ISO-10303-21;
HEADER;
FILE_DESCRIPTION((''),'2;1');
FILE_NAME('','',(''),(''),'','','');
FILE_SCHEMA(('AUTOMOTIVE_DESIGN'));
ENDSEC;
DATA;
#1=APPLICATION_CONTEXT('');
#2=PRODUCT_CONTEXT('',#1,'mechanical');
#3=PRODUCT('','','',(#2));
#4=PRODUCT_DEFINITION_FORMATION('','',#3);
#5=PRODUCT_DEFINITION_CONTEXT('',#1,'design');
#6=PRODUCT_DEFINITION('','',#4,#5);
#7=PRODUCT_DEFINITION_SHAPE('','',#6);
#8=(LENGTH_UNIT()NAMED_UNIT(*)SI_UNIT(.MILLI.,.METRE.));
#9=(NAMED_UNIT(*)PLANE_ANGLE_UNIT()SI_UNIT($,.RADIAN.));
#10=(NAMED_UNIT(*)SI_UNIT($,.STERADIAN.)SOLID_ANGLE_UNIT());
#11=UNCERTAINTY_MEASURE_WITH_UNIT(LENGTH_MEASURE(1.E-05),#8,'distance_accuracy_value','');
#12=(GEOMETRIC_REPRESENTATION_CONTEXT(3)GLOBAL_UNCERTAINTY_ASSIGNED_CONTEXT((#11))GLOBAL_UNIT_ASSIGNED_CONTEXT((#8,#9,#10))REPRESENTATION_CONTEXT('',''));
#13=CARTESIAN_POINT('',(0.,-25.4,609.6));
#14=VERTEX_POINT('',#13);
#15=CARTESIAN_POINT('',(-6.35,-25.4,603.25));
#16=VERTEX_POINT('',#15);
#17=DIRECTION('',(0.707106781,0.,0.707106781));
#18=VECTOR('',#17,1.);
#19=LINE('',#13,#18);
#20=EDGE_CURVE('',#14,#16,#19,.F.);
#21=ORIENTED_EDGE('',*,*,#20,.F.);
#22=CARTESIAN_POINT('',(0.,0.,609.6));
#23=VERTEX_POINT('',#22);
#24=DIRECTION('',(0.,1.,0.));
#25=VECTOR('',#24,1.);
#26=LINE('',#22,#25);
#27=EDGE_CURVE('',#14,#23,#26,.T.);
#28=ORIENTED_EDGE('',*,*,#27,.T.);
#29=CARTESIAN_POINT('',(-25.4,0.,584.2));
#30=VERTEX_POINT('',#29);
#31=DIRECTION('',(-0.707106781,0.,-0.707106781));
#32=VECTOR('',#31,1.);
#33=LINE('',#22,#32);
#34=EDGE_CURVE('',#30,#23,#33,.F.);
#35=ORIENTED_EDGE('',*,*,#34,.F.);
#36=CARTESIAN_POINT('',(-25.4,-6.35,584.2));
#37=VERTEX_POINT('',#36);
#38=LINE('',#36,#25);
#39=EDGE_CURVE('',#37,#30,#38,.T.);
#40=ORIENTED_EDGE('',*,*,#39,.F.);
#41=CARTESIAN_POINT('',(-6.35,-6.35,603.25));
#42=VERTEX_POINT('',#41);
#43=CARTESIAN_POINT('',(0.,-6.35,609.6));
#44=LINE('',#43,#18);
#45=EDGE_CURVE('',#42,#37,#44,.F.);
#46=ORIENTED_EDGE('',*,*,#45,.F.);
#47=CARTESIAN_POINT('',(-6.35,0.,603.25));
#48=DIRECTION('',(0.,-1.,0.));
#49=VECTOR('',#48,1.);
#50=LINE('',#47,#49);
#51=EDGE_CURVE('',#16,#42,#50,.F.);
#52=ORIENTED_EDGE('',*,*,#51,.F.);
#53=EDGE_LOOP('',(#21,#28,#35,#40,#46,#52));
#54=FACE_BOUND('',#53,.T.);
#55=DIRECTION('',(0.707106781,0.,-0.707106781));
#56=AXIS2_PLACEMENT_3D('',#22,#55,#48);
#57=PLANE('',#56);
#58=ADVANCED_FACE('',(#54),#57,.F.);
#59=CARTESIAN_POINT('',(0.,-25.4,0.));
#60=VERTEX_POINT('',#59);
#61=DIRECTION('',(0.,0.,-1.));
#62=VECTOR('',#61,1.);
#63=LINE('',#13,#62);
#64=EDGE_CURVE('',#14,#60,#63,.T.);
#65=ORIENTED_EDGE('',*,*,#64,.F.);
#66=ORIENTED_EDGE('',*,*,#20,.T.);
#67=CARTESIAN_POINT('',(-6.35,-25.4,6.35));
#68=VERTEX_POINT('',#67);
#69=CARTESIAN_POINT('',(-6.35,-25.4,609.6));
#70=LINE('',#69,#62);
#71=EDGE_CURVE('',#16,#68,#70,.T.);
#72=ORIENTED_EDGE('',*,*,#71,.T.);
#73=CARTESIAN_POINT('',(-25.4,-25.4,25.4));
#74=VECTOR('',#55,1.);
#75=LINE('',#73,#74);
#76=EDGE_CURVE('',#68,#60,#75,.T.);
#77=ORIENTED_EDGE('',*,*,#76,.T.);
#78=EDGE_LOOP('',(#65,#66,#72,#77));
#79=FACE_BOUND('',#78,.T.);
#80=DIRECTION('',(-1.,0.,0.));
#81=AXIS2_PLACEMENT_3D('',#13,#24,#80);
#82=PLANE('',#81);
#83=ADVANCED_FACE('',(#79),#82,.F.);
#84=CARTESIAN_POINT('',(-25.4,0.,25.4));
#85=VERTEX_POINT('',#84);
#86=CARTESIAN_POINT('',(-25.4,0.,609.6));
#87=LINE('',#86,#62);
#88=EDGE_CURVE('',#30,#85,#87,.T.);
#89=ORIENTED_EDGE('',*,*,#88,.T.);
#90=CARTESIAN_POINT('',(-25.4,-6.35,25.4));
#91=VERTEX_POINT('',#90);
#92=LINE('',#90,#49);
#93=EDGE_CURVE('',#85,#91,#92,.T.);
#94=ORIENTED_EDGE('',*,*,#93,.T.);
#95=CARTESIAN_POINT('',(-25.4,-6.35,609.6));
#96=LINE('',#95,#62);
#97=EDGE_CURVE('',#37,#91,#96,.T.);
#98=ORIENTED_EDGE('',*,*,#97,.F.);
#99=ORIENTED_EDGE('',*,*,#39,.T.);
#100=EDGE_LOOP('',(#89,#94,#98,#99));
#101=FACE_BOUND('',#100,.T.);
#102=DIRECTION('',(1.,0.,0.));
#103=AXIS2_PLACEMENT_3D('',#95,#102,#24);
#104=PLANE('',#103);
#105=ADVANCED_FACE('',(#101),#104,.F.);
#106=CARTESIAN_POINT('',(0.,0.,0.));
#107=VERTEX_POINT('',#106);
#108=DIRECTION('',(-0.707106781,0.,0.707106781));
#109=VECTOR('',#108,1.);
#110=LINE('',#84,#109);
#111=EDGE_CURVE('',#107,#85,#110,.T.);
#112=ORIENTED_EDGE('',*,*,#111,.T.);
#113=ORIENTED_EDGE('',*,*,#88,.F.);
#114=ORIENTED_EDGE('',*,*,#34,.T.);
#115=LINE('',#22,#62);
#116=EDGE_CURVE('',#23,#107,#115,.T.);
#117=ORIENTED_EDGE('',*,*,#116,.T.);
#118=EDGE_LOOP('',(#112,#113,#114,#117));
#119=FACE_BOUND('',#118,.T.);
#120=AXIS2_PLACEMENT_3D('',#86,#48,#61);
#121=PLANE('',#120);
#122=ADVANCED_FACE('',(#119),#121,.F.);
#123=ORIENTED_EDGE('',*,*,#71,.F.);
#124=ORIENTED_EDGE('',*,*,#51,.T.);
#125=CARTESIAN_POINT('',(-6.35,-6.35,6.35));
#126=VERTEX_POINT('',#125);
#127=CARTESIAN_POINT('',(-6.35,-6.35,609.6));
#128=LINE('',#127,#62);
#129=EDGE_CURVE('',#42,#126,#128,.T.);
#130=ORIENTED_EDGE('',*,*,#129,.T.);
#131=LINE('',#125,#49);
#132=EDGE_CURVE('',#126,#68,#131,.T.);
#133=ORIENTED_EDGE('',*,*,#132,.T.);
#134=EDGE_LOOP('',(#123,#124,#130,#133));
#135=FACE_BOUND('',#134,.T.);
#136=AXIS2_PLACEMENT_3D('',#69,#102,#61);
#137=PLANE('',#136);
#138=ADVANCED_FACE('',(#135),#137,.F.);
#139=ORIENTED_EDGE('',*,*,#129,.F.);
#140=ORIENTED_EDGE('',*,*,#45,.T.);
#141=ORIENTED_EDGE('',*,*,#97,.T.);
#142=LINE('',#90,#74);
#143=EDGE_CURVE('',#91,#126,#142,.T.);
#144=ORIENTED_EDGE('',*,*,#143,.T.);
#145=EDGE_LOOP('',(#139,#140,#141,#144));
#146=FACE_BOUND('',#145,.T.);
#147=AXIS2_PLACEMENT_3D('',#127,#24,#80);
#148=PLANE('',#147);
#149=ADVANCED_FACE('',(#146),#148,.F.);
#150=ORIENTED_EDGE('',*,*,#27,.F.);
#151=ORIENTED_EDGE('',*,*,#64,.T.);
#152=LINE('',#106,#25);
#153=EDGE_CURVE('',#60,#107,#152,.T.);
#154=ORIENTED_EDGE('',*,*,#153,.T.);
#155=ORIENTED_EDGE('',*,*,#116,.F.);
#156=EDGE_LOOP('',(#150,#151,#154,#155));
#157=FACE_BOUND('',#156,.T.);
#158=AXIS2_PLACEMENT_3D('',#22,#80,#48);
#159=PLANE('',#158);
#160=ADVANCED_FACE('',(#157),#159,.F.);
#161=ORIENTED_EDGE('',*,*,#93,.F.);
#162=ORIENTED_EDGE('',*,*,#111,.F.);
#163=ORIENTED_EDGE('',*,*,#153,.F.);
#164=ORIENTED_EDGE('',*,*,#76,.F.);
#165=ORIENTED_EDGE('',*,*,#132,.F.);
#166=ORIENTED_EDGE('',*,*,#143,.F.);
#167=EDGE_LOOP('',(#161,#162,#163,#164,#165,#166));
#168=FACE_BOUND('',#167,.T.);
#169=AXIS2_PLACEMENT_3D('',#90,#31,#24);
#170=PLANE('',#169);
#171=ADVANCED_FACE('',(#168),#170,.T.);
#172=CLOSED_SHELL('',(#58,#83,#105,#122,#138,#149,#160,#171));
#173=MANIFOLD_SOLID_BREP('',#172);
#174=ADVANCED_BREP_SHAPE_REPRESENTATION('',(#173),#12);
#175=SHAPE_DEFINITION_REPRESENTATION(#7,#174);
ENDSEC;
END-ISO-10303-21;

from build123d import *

# Parameters (mm, degrees)
BOSS_EXTRUDE1_DEPTH = 609.6
CHAMFER1_SIZE       = 25.4


with BuildPart() as part:
    # Sketch1 → Boss-Extrude1 (new body)
    with BuildSketch(Plane.XY):
        Polygon((0, 0), (0, -25.4), (-6.35, -25.4), (-6.35, -6.35), (-25.4, -6.35), (-25.4, 0), align=None)
    extrude(amount=BOSS_EXTRUDE1_DEPTH)

    # Chamfer1
    chamfer1_edges = [part.edges().sort_by_distance(p)[0] for p in [
        (-25.4, -3.175, 0),
        (-25.4, -3.175, 609.6),
    ]]
    chamfer(chamfer1_edges, length=CHAMFER1_SIZE - 0.0001)  # a hair under: the kernel refuses the full size


solid = part.part
